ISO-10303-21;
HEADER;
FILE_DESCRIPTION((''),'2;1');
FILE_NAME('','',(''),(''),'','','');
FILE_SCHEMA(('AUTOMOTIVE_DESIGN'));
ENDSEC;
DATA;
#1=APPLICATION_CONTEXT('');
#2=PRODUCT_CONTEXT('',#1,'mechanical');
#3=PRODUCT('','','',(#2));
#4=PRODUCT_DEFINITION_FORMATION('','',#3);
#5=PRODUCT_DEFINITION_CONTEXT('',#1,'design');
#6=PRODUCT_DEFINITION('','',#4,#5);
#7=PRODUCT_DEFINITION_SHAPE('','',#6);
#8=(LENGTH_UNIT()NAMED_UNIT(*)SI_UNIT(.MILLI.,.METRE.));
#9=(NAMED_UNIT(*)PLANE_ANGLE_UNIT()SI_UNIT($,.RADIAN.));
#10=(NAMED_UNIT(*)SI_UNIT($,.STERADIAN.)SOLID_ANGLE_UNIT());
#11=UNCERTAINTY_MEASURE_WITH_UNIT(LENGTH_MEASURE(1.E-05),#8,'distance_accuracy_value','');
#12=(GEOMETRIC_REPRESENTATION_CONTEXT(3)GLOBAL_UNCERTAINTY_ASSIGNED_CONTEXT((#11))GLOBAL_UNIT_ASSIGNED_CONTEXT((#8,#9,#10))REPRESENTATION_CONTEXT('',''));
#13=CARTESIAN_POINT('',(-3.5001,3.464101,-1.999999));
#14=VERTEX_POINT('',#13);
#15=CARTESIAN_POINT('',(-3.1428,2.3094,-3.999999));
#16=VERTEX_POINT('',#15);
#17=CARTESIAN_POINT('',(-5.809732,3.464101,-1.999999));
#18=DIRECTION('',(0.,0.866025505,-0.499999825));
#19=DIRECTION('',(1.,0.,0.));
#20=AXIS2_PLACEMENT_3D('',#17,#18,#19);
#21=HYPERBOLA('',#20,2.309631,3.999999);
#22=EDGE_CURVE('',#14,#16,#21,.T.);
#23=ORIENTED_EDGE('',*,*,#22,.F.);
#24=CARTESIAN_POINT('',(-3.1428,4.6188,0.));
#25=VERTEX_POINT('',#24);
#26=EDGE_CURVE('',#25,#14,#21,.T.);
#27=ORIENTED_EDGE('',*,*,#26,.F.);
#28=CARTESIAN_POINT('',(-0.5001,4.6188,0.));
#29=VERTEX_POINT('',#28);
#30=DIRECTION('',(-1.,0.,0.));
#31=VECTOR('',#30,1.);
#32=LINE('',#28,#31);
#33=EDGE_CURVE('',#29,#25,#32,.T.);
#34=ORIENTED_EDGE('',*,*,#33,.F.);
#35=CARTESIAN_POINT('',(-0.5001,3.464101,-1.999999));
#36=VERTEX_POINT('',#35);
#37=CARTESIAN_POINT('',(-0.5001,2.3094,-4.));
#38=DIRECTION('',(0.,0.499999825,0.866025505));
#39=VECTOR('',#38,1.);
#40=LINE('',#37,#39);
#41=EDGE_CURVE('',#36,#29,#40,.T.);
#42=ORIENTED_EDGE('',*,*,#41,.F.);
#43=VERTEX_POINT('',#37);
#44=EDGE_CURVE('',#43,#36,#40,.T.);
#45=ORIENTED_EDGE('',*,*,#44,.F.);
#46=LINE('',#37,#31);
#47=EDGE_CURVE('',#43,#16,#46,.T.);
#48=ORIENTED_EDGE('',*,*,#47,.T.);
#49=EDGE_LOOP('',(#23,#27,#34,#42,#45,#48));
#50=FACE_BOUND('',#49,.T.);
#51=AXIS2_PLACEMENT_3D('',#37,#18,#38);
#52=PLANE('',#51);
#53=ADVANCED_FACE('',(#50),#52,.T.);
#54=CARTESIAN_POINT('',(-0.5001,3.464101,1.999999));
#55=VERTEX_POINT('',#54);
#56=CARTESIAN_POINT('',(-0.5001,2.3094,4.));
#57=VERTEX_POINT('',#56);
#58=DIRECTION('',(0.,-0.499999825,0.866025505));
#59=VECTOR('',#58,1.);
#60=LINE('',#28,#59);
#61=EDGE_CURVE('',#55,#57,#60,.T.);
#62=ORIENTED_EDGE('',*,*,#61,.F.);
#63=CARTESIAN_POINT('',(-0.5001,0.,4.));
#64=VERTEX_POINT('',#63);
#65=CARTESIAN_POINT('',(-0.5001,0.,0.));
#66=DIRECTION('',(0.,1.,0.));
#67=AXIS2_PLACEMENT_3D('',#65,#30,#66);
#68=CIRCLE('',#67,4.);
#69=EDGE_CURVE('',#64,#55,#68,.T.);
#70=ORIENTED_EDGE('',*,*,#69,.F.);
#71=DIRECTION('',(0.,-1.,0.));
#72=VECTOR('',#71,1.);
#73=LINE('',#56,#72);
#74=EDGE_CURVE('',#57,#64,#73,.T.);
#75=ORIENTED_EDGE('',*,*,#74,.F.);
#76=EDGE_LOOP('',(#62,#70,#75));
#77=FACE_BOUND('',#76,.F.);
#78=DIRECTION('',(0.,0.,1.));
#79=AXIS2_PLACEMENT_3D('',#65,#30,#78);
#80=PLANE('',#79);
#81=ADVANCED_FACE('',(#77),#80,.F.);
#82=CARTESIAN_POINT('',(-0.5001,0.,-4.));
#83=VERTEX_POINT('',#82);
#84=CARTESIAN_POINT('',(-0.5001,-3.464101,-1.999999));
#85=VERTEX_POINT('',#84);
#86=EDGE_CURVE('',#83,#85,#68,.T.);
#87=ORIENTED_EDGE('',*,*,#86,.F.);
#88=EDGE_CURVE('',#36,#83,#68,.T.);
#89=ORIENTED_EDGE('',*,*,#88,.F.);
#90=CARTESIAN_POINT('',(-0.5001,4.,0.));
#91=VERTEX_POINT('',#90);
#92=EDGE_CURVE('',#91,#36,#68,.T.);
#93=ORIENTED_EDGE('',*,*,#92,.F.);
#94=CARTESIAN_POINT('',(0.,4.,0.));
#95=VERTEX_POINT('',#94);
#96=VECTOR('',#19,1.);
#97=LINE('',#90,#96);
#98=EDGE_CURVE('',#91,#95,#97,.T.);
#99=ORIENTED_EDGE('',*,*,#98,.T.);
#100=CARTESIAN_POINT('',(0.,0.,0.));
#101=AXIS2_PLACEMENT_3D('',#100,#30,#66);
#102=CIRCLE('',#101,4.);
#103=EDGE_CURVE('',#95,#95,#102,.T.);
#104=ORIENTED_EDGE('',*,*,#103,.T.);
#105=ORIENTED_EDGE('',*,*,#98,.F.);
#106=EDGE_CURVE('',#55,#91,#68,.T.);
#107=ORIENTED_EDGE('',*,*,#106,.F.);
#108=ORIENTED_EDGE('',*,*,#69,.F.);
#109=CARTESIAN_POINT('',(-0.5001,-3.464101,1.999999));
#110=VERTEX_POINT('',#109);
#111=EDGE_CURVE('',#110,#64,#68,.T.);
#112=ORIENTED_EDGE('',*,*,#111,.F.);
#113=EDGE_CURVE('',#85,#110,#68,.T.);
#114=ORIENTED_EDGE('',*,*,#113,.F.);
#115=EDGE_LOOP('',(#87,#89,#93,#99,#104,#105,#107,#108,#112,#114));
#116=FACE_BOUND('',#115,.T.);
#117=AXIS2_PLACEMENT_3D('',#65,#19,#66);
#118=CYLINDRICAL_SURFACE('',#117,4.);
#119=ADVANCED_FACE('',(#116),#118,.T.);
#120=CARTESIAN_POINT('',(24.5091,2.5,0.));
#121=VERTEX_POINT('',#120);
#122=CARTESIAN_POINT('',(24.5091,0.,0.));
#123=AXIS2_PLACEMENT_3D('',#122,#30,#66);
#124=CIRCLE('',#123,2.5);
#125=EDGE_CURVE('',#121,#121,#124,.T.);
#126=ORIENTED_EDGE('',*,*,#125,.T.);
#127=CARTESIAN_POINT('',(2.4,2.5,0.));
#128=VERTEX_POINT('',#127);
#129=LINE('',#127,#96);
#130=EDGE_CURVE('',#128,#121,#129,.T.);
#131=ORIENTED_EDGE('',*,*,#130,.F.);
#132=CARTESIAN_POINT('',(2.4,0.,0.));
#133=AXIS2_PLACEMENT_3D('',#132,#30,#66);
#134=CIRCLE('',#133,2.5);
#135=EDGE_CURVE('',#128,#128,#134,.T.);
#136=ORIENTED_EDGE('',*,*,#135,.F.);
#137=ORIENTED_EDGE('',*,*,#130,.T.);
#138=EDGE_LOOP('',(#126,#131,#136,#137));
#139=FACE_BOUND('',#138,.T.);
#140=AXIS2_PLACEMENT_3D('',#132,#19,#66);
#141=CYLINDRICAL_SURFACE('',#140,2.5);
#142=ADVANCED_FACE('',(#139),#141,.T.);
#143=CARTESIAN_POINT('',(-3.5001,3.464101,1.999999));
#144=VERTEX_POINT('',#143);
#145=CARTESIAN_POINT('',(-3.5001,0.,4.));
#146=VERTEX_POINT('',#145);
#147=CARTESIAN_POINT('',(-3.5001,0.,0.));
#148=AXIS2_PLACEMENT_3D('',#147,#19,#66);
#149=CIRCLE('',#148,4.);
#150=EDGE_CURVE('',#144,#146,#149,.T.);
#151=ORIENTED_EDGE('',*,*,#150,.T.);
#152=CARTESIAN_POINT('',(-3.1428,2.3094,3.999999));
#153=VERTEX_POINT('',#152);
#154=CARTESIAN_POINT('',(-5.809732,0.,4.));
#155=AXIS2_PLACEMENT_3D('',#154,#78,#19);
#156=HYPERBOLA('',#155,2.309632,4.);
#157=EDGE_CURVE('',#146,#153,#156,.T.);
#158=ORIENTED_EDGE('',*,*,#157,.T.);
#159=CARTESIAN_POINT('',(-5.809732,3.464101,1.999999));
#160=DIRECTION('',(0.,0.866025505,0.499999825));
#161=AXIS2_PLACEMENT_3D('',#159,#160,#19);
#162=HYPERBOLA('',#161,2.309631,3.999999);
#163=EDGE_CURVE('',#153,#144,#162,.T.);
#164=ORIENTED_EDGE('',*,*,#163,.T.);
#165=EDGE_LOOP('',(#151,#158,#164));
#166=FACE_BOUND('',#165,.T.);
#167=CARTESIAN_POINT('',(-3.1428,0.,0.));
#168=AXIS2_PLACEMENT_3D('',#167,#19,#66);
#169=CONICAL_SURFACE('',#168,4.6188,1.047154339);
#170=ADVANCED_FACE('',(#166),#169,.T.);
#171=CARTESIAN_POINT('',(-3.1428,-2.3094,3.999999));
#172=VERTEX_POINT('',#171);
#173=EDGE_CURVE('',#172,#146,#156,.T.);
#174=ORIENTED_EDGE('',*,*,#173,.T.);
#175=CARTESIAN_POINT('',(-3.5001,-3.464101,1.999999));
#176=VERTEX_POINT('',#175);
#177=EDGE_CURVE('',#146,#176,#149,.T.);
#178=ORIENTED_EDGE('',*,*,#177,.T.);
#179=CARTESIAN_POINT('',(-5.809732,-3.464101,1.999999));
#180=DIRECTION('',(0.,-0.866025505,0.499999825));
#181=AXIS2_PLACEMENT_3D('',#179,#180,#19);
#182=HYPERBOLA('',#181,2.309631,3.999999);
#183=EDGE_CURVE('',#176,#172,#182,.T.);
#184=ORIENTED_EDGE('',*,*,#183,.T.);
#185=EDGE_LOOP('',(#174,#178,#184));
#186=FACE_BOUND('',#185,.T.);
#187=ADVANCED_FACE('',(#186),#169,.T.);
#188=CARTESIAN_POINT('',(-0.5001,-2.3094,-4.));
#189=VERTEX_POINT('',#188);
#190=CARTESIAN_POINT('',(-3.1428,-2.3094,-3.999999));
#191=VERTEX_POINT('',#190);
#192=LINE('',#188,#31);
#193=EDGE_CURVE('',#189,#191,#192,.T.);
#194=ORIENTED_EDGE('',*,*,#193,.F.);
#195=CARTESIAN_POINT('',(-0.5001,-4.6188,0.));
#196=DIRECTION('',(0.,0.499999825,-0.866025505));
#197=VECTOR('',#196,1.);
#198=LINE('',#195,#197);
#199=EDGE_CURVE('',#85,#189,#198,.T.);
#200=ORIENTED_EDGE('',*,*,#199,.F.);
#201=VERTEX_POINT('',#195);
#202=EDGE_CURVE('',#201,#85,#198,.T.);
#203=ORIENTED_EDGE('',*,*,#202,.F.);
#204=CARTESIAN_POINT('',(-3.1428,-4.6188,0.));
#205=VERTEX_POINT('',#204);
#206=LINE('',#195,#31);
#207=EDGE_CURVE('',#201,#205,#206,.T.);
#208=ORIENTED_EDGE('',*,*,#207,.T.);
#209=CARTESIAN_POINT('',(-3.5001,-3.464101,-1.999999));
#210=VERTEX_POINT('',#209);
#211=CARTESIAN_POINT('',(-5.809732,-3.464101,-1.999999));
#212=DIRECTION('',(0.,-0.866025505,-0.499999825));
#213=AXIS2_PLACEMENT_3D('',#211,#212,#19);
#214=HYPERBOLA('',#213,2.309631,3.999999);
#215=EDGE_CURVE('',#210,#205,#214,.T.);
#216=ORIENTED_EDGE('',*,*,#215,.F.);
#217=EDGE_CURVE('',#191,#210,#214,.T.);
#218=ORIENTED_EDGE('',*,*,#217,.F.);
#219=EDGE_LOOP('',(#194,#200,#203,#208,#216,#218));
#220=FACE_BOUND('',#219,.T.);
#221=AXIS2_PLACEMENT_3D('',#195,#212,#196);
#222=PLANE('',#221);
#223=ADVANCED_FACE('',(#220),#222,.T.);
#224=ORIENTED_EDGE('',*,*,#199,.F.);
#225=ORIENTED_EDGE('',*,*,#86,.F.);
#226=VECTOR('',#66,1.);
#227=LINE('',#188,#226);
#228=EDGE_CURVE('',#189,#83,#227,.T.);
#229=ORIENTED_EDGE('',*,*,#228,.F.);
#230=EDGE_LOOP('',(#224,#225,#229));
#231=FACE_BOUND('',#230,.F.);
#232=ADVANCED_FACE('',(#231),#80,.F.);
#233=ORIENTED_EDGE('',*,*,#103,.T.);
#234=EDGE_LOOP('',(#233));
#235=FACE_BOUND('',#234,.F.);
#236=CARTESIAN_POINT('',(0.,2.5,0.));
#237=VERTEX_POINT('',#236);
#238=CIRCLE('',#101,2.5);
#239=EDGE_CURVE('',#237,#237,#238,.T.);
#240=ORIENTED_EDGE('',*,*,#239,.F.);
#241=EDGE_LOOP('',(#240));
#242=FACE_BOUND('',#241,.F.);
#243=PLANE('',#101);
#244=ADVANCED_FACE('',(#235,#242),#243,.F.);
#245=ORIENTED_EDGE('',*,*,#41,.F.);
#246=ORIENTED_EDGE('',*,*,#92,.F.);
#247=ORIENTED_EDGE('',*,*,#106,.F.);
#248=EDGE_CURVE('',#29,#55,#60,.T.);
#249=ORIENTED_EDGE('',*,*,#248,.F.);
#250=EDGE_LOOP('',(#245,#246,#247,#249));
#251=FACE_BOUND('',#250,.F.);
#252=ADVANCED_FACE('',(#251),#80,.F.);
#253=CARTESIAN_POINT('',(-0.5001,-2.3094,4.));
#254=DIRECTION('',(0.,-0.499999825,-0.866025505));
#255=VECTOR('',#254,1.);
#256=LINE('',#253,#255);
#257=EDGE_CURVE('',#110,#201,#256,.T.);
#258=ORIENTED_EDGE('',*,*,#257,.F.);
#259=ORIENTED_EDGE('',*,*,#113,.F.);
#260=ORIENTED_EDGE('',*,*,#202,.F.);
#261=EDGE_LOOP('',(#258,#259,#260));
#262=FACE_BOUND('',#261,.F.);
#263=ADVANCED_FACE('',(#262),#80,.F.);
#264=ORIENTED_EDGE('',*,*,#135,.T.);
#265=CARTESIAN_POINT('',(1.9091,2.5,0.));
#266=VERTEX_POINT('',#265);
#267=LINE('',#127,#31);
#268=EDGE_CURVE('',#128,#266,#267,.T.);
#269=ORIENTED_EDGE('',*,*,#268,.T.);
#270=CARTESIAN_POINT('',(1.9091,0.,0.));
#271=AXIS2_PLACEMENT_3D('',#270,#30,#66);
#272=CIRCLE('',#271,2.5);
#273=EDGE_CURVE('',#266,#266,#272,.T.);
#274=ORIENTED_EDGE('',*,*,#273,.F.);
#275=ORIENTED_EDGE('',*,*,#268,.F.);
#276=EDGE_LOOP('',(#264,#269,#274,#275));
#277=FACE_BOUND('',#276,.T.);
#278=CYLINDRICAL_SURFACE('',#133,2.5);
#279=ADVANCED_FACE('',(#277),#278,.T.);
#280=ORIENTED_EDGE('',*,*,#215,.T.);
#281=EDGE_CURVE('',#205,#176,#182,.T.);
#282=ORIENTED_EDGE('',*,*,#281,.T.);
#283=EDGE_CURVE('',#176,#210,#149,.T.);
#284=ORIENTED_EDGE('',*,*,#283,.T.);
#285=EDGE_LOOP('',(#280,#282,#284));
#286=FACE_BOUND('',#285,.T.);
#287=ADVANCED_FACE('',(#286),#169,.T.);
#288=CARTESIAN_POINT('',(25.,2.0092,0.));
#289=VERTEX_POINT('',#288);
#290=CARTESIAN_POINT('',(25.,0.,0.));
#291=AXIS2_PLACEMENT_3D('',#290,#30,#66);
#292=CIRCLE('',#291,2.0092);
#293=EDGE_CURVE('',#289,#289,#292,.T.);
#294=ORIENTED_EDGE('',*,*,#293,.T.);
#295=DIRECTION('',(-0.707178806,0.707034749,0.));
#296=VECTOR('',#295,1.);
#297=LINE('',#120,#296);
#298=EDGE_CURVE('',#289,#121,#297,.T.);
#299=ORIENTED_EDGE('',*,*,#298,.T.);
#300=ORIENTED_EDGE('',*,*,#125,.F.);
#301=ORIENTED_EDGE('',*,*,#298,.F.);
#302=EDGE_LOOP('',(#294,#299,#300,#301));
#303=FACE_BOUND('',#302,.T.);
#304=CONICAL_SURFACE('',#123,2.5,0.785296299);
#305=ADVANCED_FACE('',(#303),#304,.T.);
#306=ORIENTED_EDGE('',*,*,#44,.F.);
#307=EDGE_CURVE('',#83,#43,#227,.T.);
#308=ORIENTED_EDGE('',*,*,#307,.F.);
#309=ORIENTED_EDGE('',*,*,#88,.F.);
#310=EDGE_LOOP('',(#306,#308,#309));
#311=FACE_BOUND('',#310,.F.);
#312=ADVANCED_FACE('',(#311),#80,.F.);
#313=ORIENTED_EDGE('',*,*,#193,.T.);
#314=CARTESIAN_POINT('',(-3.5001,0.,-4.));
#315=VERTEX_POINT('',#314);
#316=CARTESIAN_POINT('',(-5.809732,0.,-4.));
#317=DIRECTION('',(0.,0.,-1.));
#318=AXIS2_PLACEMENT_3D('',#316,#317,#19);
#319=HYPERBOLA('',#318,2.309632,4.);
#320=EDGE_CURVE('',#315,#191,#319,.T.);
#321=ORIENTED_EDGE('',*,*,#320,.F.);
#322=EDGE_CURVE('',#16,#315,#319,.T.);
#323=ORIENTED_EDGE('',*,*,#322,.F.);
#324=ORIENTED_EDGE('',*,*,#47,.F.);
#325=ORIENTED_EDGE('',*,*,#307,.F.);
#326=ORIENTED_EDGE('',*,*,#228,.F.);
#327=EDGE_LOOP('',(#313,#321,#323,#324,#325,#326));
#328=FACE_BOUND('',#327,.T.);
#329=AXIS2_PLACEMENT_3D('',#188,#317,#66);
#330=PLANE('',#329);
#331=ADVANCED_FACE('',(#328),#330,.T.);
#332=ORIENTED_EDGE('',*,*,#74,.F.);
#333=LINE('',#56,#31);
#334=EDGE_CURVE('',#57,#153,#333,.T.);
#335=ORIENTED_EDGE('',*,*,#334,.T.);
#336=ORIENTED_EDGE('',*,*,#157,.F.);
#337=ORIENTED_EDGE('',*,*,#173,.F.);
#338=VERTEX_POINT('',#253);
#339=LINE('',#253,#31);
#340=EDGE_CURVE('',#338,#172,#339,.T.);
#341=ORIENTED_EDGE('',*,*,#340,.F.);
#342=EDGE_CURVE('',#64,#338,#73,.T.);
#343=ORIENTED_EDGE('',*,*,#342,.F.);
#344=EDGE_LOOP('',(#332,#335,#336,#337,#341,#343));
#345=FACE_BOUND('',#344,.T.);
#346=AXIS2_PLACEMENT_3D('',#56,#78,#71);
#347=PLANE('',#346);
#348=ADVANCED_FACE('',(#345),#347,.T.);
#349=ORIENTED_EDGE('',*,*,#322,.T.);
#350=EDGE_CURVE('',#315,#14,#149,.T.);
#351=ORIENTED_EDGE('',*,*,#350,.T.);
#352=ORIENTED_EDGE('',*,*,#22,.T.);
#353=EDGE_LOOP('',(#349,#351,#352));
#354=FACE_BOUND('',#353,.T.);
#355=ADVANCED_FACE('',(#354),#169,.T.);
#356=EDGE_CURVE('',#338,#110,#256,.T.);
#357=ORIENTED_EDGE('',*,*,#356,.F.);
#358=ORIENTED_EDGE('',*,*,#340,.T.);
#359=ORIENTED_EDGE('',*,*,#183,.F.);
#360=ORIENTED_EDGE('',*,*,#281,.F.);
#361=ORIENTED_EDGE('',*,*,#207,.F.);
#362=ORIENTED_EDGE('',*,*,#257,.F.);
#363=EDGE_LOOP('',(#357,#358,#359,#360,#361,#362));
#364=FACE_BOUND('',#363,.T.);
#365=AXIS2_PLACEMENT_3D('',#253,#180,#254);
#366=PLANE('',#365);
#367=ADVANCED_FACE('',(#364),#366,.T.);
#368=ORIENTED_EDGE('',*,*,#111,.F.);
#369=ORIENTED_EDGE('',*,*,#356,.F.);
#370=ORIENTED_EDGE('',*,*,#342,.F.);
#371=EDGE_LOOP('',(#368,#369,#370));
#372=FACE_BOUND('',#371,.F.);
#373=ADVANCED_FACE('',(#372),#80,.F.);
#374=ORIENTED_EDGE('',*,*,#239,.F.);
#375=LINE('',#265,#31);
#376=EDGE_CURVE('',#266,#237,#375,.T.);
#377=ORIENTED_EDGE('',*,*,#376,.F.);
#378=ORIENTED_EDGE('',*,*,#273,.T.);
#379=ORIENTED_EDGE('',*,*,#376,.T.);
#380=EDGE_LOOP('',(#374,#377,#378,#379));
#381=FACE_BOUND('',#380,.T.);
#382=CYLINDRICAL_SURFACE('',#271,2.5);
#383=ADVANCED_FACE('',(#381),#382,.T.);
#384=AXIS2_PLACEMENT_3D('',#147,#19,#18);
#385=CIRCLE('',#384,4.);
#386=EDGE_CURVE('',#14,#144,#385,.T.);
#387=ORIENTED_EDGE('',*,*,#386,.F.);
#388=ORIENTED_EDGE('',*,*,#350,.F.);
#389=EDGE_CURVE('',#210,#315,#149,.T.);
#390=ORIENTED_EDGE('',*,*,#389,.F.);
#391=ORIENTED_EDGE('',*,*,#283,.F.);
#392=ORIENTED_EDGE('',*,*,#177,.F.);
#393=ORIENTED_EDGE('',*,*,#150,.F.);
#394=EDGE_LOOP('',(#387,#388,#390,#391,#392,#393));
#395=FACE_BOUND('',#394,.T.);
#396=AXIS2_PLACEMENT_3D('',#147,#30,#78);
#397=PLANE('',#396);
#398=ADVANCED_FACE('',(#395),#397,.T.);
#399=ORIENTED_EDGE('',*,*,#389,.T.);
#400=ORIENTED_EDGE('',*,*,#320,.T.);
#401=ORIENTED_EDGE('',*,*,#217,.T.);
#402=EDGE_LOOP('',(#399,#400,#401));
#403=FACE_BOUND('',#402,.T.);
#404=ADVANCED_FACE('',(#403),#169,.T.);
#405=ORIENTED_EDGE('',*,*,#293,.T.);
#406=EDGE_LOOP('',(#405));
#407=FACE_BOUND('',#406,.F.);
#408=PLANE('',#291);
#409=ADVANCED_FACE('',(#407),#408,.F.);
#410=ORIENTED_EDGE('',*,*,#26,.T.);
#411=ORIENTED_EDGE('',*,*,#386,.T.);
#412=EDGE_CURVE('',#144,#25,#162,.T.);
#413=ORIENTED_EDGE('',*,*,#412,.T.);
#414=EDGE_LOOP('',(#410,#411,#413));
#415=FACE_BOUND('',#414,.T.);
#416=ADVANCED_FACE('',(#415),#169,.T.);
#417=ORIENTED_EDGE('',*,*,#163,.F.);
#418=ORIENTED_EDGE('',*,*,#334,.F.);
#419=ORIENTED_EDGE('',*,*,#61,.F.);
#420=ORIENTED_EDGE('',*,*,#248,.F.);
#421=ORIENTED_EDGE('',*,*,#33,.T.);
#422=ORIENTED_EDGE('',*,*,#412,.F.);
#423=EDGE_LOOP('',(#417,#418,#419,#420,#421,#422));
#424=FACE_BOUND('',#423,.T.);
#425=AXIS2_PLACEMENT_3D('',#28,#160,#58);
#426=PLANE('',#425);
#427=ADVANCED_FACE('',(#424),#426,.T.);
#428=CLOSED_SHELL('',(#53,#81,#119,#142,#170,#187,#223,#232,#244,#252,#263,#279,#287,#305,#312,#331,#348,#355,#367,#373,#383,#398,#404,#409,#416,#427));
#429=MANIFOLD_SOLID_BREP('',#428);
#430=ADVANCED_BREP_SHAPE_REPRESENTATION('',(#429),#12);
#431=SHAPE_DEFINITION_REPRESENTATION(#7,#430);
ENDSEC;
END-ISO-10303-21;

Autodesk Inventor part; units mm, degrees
ref_plane "YZ Plane" through (0, 0, 0) normal (1, 0, 0) x (0, 1, 0)
ref_plane "XZ Plane" through (0, 0, 0) normal (0, 1, 0) x (-1, 0, 0)
sketch "Náčrt1" plane through (0, 0, 0) normal (0, 0, 1) x (1, 0, 0)
  line L0 (0, 4) -> (0, 2.5)
  line L1 (2.4, 2.5) -> (25, 2.5)
  line L2 (25, 2.5) -> (25, 0)
  line L3 (25, 0) -> (-0.5001, 0)
  line L4 (-5.6001, 0) -> (30.1, 0) projected
  line L5 (-0.5001, 0) -> (-0.5001, 4)
  line L6 (-0.5001, 4) -> (0, 4)
  line L7 (2.4, 2.5) -> (1.9091, 2.5)
  line L8 (1.9091, 2.5) -> (0, 2.5)
  line L9 (0, -0.8) -> (0, 4.8) projected
  dimension "d0" = 25
  dimension "d1" = 22.6
  dimension "d2" = 5
  dimension "d9" = 0.5001
  dimension "d10" = 8
  dimension "d13" = 0.4909
  dimension "d14" = 5
revolve "Těleso" add sketch "Náčrt1" angle 360 about axis through (25, 0, 0) along (-1, 0, 0)
sketch "Náčrt2" plane through (-0.5001, 0, 0) normal (-1, 0, 0) x (0, 0, 1)
  line L0 (0, 4.6188) -> (4, 2.3094)
  line L1 (4, 2.3094) -> (4, -2.3094)
  line L2 (4, -2.3094) -> (0, -4.6188)
  line L3 (0, -4.6188) -> (-4, -2.3094)
  line L4 (-4, -2.3094) -> (-4, 2.3094)
  line L5 (-4, 2.3094) -> (0, 4.6188)
  point P0 (0, 0)
  point P1 (0, 0)
  dimension "d11" = 8
extrude "Hlava" add sketch "Náčrt2" along normal blind 3
sketch "Náčrt4" plane through (0, 0, 0) normal (0, 0, 1) x (1, 0, 0)
  line L0 (-3.5001, 4) -> (-3.5001, 4.6188)
  line L1 (-3.5001, 4.6188) -> (-3.1428, 4.6188)
  line L2 (-3.1428, 4.6188) -> (-3.5001, 4)
  line L3 (-4.1001, 0) -> (0.0999, 0) projected
  line L4 (-0.5001, 4.6188) -> (-3.5001, 4.6188) projected
  line L5 (-3.5001, 2.3094) -> (-3.5001, 4.6188) projected
  dimension "d5" = 30
  dimension "d19" = 8
revolve "Zkosení1" cut sketch "Náčrt4" angle 360 about axis through (-10, 0, 0) along (1, 0, 0)
thread "Závit" size "M5x0.8" class "6g" standard "ISO Metric profile" length 22.6
chamfer "Zkosení2" distance 0.4908 distance2 0.4909 1 edges at (25, -2.5, 0) measured on face at (25, 0.7379, -0.3873)
ref_plane "Work Plane1" through (1.525, 0, 0) normal (0, 0, 1) x (1, 0, 0)
equation "\"d11\" = SW"
equation "\"d3\" = KOH - SD"
equation "\"d15\" = GEL"
equation "\"d6\" = -0.5 * SPD + 0.5 * GD"
equation "\"d0\" = NLG"
equation "\"d1\" = GEL"
equation "\"d2\" = GD"
equation "\"d10\" = SD2"
equation "\"d14\" = BDM"
equation "\"d5\" = ANG1"
equation "\"d19\" = SW0"
equation "\"NLG\" = 25"
equation "\"GD\" = NND"
equation "\"BDM\" = NND"
equation "\"KOH\" = 3.5"
equation "\"GEL\" = 22.6"
equation "\"SW\" = 8"
equation "\"SW0\" = SW"
equation "\"SPD\" = NND - 1.2269 * PTC"
equation "\"SD2\" = SW"
equation "\"SD\" = 0.5"
equation "\"ANG1\" = 30deg"
equation "\"GAL\" = 0.61345 * PTC"
equation "\"GUL\" = 0.61345 * PTC"
equation "\"RR\" = 0.2"
equation "\"WFT\" = SD"
equation "\"GD1\" = THREADDIA - 1.2269 * PTC"
equation "\"THREADDIA\" = 5"
equation "\"SDH\" = SW"
equation "\"TOA\" = 30deg"
equation "\"FAWI\" = 45deg"
equation "\"PTC\" = 0.8"
equation "\"NND\" = 5"
equation "\"E0\" = 1.155 * SW"
properties part number "AS 1110 - M5 x 25" material "Ocel, měkká"
